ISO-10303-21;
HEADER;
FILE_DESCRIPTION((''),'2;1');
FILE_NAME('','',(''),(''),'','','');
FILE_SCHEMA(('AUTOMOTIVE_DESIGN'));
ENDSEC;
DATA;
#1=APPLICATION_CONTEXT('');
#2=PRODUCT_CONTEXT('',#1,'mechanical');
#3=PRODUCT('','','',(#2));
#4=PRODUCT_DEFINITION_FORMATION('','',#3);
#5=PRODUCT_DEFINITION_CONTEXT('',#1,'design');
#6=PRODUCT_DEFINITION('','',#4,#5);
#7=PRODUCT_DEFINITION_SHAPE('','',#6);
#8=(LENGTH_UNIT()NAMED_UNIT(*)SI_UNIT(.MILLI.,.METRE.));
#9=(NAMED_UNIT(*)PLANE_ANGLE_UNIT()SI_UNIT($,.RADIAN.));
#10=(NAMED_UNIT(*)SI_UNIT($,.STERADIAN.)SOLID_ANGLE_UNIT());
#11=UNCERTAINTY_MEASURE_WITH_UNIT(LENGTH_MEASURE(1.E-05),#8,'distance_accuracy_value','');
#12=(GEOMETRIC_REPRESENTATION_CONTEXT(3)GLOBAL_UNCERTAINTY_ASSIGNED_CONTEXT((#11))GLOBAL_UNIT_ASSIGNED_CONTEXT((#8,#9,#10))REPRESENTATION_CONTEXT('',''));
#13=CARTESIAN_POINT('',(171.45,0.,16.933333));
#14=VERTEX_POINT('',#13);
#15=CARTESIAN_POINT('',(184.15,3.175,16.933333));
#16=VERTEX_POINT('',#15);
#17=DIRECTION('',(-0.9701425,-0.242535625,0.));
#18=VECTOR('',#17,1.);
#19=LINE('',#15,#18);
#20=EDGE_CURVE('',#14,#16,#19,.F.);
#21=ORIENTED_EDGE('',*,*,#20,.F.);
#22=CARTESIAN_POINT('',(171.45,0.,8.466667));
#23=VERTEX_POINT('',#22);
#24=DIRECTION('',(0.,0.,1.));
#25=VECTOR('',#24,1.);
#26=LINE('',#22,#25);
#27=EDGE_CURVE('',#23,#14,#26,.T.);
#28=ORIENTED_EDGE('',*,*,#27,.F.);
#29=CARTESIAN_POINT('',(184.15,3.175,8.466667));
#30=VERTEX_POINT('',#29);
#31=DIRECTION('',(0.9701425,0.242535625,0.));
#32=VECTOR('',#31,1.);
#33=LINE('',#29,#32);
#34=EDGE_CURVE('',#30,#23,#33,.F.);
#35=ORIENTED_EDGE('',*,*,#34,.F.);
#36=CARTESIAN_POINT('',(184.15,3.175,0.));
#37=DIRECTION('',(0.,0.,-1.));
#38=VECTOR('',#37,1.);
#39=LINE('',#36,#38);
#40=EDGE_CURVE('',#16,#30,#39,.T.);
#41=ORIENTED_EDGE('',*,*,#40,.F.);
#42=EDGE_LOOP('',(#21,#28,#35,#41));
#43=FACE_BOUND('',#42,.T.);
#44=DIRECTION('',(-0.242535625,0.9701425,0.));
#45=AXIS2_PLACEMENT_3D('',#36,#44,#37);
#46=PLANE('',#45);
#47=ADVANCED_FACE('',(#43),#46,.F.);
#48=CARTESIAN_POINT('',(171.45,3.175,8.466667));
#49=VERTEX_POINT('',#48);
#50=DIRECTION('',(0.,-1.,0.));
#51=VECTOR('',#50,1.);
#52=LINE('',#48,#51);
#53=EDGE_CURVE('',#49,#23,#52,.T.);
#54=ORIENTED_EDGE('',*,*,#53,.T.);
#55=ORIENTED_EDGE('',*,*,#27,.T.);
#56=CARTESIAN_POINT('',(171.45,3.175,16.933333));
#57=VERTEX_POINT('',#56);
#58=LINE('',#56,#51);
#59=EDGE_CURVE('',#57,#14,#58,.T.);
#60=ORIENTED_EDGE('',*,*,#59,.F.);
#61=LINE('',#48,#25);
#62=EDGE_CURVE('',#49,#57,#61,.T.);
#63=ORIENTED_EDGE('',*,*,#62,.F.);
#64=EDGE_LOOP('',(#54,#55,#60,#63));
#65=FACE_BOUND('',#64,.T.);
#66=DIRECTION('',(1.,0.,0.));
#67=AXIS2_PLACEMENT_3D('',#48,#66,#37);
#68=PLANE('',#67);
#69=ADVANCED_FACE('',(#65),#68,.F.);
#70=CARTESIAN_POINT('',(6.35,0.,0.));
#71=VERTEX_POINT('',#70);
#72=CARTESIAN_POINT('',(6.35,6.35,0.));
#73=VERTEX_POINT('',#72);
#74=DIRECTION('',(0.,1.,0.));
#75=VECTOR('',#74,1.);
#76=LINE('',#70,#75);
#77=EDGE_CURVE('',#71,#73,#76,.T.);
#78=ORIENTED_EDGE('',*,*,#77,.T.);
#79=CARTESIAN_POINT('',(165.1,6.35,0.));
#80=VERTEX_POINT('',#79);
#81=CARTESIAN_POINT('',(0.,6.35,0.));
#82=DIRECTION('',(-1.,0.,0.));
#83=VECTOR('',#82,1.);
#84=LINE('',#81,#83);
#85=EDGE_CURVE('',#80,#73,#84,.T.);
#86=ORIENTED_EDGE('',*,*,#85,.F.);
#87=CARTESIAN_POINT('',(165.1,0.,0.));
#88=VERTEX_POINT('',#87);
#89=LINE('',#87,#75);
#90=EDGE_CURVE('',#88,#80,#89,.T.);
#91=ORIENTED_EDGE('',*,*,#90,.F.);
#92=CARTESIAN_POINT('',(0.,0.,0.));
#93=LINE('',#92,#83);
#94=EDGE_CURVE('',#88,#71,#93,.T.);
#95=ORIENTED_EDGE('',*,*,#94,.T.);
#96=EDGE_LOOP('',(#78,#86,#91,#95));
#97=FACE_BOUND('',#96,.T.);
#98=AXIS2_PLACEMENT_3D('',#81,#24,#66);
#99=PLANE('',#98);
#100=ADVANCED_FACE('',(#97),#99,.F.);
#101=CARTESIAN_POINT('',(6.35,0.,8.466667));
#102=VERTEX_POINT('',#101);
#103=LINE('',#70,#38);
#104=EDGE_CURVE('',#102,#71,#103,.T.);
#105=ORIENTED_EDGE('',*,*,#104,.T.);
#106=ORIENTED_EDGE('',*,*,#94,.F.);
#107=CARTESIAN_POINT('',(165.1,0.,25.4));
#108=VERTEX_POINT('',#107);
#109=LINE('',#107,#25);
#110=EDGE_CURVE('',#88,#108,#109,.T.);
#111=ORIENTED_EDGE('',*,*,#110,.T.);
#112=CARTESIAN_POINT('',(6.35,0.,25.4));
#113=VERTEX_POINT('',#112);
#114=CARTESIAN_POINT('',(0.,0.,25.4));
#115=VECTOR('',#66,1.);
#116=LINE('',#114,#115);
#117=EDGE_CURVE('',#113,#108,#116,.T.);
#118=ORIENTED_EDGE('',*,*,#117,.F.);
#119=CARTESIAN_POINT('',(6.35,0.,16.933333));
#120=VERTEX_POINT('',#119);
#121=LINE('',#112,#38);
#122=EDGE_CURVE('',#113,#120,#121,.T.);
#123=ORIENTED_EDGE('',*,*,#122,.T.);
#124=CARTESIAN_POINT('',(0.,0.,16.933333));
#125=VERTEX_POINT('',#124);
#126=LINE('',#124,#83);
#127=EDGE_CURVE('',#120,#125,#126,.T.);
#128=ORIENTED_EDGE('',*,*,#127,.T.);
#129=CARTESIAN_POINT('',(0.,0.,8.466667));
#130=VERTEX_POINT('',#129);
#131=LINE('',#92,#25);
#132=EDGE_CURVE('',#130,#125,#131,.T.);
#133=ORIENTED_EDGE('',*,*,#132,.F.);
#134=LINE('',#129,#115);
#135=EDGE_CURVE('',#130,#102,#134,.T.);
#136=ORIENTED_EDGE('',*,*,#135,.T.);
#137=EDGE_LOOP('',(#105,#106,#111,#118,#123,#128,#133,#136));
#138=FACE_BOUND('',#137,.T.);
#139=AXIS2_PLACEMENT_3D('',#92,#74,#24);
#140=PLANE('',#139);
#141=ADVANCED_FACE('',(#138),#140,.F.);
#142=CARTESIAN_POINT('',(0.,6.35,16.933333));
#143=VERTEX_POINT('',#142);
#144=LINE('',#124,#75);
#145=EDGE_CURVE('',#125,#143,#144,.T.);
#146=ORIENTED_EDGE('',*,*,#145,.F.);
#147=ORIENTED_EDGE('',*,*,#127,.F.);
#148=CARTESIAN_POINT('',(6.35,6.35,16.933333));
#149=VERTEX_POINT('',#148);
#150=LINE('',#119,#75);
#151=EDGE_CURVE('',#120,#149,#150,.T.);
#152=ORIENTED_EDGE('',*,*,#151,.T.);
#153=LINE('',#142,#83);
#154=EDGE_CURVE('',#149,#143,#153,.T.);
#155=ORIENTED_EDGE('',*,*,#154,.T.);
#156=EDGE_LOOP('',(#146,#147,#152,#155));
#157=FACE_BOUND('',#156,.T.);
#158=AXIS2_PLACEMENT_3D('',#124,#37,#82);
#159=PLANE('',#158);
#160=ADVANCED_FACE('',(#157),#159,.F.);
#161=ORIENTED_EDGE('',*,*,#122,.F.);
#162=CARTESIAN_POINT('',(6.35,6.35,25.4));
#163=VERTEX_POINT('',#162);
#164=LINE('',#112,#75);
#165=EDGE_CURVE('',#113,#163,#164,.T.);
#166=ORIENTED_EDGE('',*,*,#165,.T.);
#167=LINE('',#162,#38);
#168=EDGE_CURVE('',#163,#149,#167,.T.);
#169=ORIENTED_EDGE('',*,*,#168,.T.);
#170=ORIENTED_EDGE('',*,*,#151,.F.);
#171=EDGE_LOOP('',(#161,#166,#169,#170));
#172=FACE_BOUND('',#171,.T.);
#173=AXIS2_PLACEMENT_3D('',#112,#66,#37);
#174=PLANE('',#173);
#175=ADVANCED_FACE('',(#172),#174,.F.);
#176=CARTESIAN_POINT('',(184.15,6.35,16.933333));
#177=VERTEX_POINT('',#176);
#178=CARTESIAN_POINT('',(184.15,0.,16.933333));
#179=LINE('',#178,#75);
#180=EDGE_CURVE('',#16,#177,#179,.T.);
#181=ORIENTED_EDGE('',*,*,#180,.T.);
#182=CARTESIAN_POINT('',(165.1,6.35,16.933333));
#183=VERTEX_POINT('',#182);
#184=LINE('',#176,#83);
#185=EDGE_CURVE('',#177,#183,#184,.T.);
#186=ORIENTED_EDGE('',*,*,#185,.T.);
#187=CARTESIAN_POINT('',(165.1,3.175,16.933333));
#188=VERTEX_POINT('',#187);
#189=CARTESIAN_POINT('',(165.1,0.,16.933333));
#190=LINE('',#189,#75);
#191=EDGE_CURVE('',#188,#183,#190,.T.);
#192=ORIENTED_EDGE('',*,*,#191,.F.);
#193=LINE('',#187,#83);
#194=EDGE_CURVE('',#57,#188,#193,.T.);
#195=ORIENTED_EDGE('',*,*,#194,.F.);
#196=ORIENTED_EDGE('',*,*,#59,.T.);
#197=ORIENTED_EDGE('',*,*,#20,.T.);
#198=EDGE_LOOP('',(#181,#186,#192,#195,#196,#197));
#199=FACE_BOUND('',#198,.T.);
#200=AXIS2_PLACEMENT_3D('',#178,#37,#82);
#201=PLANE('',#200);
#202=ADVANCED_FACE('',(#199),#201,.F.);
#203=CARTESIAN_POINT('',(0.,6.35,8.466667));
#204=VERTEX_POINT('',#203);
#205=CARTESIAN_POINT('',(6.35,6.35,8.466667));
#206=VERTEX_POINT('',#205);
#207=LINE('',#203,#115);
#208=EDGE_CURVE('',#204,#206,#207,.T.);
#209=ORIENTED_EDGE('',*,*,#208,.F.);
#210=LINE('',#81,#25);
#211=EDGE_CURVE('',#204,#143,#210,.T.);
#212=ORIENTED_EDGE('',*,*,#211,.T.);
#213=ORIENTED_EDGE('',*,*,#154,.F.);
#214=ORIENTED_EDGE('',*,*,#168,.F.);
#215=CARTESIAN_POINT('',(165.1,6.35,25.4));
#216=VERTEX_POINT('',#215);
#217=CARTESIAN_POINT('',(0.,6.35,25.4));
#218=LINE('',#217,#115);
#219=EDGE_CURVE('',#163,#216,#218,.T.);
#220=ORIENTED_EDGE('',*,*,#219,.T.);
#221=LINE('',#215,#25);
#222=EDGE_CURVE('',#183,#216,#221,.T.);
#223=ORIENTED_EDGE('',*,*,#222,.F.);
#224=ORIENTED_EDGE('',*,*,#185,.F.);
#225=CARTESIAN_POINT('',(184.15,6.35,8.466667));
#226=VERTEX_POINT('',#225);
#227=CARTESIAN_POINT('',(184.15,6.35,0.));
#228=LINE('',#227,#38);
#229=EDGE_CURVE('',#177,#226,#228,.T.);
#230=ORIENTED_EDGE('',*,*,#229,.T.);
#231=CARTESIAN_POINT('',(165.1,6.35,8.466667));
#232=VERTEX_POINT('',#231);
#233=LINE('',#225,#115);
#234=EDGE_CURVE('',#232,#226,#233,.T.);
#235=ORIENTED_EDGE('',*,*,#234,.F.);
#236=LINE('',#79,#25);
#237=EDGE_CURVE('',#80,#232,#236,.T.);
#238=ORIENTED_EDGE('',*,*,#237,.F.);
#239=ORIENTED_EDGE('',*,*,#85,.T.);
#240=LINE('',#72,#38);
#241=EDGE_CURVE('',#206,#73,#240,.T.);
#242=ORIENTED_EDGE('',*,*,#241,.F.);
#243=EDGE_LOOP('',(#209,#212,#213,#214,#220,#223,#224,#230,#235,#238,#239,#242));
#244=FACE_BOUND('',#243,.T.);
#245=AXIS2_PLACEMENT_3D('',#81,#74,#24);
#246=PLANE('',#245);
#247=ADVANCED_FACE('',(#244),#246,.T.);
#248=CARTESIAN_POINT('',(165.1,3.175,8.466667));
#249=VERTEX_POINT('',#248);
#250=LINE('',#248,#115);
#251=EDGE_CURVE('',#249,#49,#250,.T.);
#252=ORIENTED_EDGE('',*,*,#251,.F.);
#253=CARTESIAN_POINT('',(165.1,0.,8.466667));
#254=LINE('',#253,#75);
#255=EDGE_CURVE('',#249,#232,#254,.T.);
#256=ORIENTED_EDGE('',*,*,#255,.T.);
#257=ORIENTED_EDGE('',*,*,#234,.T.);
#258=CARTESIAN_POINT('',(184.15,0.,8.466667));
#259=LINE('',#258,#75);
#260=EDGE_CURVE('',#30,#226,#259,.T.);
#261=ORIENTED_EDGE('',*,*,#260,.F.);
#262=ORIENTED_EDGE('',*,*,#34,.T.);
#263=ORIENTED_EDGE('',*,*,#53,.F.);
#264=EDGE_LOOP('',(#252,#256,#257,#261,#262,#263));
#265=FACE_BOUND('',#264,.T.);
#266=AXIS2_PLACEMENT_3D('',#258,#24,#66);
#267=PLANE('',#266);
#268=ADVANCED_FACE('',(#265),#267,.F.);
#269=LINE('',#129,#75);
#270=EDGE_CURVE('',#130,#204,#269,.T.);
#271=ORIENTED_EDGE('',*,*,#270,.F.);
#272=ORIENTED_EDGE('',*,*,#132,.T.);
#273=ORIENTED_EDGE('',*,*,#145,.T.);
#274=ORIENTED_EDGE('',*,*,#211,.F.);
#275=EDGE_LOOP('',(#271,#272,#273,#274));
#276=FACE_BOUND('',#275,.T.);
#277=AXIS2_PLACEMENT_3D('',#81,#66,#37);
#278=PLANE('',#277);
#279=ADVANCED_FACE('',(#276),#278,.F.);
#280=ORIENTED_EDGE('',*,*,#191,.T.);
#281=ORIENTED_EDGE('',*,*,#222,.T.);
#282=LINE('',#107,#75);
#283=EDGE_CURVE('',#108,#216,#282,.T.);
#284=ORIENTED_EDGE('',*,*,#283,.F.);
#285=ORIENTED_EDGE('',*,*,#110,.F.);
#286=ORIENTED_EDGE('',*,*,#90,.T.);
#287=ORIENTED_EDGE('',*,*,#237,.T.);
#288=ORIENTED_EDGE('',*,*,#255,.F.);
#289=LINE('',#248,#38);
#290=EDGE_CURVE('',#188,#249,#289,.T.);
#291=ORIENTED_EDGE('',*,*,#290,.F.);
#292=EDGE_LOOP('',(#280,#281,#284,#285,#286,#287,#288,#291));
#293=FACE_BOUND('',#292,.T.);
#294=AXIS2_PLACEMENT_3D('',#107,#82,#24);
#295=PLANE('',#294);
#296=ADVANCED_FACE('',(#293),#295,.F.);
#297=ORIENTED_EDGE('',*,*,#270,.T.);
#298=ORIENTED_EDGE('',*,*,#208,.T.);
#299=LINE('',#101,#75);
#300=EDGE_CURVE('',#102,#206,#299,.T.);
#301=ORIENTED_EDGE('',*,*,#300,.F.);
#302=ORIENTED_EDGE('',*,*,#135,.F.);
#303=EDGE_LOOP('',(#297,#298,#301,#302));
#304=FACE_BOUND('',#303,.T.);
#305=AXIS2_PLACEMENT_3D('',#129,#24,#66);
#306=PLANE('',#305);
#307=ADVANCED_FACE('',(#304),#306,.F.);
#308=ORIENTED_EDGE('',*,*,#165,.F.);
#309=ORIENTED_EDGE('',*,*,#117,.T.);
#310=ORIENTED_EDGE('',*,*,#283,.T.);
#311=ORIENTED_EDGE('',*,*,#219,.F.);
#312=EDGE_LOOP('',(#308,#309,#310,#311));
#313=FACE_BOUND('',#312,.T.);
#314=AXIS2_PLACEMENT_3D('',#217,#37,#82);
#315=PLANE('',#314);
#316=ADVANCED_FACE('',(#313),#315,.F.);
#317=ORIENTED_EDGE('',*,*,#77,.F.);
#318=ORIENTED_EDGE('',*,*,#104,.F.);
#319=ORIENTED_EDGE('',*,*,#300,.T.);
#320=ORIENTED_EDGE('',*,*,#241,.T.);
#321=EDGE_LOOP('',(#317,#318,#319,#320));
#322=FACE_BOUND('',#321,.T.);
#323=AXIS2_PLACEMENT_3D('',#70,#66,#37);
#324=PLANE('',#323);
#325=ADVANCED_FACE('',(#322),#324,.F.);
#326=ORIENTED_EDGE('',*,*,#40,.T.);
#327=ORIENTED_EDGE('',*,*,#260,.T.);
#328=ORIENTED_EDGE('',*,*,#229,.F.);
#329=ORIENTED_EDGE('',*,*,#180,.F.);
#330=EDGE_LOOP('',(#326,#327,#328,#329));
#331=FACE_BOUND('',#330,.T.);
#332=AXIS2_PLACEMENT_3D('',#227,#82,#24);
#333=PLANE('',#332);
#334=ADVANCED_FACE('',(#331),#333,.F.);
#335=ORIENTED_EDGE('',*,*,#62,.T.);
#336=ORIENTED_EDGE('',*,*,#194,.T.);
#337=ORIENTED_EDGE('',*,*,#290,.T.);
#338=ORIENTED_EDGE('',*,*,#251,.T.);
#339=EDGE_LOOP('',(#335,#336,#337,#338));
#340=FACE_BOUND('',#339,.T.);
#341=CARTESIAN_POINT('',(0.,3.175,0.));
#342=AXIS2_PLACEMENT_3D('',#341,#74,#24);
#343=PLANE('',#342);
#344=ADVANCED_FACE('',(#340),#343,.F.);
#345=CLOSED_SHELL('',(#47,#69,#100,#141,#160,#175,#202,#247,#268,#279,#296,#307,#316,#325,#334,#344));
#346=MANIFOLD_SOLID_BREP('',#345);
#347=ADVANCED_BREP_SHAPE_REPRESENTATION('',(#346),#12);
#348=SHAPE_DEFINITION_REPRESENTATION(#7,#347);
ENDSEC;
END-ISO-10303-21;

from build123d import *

# Parameters (mm, degrees)
SKETCH1_W           = 184.15
SKETCH1_H           = 25.4
BOSS_EXTRUDE1_DEPTH = 6.35
SKETCH4_W           = 6.35
SKETCH4_H           = 8.466666667
CUT_EXTRUDE1_DEPTH  = 187.001895152
SKETCH5_W           = 19.05
SKETCH5_H           = 8.466666667
CUT_EXTRUDE2_DEPTH  = 6.35
SKETCH6_W           = 6.35
SKETCH6_H           = 8.466666666
CUT_EXTRUDE3_DEPTH  = 3.175
CHAMFER3_SIZE2      = 3.175
CHAMFER3_SIZE       = 12.7


with BuildPart() as part:
    # Sketch1 → Boss-Extrude1 (new body)
    with BuildSketch(Plane(origin=(0, 0, 0), x_dir=(1, 0, 0), z_dir=(0, 1, 0))):
        with Locations((92.075, -12.7)):
            Rectangle(SKETCH1_W, SKETCH1_H)
    extrude(amount=BOSS_EXTRUDE1_DEPTH)

    # Sketch4 → Cut-Extrude1 (cut, through all)
    with BuildSketch(Plane(origin=(0, 6.35, 0), x_dir=(1, 0, 0), z_dir=(0, 1, 0))):
        with Locations((3.175, -4.233333334)):
            Rectangle(SKETCH4_W, SKETCH4_H)
        with Locations((3.175, -21.166666666)):
            Rectangle(SKETCH4_W, SKETCH4_H)
    extrude(amount=-CUT_EXTRUDE1_DEPTH, mode=Mode.SUBTRACT)

    # Sketch5 → Cut-Extrude2 (cut)
    with BuildSketch(Plane(origin=(0, 6.35, 0), x_dir=(1, 0, 0), z_dir=(0, 1, 0))):
        with Locations((174.625, -21.166666666)):
            Rectangle(SKETCH5_W, SKETCH5_H)
        with Locations((174.625, -4.233333334)):
            Rectangle(SKETCH5_W, SKETCH5_H)
    extrude(amount=-CUT_EXTRUDE2_DEPTH, mode=Mode.SUBTRACT)

    # Sketch6 → Cut-Extrude3 (cut)
    with BuildSketch(Plane.XZ):
        with Locations((168.275, 12.7)):
            Rectangle(SKETCH6_W, SKETCH6_H)
    extrude(amount=-CUT_EXTRUDE3_DEPTH, mode=Mode.SUBTRACT)

    # Chamfer3
    chamfer3_edges = [part.edges().sort_by_distance(p)[0] for p in [
        (184.15, 0, 12.7),
    ]]
    chamfer3_side = [part.faces().sort_by_distance(p)[0] for p in [
        (184.0865, 0, 12.7),
    ]]
    chamfer(chamfer3_edges, length=CHAMFER3_SIZE - 0.0001, length2=CHAMFER3_SIZE2 - 0.0001, reference=chamfer3_side[0])  # a hair under: the kernel refuses the full size


solid = part.part
